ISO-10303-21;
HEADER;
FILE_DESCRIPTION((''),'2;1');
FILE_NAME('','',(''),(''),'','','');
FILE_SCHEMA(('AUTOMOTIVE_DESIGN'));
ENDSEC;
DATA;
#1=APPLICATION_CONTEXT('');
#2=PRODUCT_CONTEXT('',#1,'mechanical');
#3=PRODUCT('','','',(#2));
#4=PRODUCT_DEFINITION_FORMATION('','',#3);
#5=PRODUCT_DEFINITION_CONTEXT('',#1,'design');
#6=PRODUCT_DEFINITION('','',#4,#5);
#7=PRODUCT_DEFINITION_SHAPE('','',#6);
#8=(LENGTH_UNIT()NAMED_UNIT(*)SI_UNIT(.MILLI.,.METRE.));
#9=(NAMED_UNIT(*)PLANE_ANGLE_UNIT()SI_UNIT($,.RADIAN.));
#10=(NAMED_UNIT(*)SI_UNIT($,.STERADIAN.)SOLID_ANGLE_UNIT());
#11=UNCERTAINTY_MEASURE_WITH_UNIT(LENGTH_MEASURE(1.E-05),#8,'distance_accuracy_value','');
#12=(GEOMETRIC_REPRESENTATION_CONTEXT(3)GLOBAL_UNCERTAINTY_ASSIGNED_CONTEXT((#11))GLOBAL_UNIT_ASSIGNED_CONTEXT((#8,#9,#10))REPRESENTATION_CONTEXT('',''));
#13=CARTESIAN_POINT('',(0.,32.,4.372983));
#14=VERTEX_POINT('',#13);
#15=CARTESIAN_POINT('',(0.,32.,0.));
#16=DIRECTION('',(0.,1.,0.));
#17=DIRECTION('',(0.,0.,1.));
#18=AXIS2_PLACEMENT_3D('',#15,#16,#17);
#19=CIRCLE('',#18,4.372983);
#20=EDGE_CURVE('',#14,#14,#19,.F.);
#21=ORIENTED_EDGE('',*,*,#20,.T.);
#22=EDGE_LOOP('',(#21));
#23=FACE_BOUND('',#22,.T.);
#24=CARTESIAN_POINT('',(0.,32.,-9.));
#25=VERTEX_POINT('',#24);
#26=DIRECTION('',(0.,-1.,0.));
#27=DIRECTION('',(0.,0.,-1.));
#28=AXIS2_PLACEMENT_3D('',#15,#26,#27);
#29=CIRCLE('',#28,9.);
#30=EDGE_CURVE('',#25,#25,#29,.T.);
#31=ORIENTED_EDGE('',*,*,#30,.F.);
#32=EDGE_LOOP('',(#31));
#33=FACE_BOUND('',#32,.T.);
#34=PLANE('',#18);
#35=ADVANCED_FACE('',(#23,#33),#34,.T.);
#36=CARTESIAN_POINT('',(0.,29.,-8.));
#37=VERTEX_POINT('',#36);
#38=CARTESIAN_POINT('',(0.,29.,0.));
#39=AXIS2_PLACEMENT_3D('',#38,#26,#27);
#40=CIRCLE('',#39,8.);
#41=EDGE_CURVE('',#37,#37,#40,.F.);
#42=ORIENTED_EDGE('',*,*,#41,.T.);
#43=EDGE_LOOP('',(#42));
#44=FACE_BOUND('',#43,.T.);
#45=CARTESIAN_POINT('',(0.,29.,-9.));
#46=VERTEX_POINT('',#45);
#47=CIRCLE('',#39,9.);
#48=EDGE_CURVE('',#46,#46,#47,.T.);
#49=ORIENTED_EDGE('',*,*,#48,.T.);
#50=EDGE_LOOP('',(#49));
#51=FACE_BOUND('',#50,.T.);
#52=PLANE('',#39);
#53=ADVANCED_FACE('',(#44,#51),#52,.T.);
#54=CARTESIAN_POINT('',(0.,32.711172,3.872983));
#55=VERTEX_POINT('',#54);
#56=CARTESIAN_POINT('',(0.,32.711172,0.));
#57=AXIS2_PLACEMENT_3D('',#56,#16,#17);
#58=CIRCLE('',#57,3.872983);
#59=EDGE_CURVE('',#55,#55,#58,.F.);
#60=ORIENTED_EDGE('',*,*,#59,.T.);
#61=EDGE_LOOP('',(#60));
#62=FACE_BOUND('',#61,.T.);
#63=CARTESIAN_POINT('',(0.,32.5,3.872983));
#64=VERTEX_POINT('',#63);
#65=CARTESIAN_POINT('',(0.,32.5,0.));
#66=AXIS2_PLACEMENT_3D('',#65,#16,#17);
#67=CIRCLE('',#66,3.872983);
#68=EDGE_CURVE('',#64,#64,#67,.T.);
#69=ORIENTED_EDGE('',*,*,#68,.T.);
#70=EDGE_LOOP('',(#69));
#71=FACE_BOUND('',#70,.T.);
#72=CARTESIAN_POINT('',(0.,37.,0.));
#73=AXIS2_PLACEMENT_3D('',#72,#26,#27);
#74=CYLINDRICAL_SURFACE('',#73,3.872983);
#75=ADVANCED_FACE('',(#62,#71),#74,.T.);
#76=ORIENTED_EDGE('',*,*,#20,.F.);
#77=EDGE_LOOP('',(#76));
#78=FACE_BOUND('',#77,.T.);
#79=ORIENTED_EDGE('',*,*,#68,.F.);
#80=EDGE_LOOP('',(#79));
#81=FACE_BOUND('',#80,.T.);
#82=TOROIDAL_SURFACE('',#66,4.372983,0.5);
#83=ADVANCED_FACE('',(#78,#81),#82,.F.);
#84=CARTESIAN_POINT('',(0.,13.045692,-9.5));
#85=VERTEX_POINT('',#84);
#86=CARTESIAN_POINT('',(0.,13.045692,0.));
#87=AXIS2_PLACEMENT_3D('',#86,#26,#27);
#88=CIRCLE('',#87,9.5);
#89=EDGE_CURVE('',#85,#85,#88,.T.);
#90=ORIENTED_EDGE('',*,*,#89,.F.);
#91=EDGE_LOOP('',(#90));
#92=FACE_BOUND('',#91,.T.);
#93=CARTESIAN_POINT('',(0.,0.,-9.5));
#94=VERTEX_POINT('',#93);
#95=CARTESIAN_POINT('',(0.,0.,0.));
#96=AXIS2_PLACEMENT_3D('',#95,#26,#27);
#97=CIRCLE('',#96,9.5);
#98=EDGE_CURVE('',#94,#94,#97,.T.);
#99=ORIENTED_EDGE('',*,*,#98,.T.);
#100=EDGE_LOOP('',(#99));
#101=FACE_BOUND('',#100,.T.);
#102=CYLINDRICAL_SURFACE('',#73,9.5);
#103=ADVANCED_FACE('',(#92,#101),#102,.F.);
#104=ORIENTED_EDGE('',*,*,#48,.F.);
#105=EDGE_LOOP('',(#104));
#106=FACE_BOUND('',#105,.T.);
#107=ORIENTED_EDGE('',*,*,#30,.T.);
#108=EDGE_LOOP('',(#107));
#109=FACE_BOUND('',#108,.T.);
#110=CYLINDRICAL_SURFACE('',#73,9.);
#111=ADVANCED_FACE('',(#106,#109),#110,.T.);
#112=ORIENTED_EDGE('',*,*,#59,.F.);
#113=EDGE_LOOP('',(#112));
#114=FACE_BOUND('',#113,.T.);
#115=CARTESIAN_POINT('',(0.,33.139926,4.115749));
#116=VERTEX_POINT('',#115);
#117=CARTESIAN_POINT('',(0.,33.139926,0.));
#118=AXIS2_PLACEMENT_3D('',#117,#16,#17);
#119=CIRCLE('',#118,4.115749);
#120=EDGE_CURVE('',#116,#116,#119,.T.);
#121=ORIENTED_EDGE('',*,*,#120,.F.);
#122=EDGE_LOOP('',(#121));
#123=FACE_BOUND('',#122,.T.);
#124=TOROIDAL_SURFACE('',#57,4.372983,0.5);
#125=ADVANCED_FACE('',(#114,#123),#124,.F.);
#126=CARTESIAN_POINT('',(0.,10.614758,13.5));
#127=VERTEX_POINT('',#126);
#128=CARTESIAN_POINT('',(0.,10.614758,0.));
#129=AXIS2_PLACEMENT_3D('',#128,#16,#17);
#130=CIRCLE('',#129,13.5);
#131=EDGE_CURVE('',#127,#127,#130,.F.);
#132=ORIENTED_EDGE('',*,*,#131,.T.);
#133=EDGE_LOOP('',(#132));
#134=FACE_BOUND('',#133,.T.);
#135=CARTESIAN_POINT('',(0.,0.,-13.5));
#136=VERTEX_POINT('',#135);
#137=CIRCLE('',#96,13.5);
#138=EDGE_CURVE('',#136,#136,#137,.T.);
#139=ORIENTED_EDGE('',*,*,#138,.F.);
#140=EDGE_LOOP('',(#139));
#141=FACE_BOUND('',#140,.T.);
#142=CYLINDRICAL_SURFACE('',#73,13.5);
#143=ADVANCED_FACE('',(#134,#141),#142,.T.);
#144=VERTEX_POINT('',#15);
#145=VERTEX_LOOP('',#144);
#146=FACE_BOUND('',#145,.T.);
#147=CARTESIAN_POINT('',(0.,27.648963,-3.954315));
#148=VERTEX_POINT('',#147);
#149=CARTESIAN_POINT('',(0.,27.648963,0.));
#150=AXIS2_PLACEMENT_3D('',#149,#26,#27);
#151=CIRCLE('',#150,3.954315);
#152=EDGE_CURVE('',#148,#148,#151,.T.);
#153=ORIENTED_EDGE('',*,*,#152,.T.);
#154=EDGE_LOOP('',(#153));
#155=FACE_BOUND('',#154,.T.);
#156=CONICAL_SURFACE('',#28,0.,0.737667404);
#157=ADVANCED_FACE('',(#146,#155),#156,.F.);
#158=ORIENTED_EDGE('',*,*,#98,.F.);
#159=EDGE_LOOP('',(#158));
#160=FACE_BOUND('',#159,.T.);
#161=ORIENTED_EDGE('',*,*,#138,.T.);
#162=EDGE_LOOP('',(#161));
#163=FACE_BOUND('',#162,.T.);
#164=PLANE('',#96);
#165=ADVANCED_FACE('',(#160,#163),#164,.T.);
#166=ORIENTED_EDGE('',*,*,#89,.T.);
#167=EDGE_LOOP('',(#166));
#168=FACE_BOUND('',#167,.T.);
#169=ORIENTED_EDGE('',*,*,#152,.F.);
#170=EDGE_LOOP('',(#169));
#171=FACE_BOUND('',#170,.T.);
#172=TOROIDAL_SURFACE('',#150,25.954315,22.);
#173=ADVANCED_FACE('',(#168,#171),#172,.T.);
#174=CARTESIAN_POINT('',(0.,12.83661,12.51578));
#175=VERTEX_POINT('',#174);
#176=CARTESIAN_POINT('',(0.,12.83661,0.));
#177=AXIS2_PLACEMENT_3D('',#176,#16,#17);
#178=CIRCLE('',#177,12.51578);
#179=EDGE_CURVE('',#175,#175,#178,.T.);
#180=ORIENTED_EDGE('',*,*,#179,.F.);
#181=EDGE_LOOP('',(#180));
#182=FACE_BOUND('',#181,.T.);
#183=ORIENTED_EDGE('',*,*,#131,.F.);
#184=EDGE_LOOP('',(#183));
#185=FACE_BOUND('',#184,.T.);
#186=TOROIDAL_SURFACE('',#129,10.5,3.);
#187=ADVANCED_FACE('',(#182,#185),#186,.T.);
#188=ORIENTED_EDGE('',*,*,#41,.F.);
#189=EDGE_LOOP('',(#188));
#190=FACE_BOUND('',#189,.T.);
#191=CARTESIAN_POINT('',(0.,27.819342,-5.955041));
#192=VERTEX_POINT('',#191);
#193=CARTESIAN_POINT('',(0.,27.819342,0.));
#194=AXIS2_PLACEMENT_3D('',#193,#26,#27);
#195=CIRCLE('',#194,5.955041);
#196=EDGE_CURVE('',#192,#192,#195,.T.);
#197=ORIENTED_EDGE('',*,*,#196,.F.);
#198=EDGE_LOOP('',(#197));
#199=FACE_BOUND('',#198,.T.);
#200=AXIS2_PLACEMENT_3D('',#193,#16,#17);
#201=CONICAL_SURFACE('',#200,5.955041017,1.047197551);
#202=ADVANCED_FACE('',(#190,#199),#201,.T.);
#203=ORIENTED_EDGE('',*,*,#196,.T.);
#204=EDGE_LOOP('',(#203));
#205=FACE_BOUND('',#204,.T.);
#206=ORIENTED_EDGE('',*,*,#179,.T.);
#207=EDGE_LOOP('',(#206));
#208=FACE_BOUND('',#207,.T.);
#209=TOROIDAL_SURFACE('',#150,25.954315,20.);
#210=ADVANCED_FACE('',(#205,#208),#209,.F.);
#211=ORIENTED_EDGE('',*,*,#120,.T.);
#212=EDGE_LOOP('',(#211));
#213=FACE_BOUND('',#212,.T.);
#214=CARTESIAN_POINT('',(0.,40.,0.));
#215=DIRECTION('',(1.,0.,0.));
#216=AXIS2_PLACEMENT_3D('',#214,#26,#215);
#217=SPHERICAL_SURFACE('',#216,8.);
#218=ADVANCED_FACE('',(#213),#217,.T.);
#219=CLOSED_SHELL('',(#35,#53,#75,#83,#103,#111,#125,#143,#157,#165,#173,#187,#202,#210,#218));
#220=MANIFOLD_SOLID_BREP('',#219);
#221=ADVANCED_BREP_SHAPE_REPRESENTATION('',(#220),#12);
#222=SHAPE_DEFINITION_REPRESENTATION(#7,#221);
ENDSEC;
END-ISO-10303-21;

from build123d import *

# Parameters (mm, degrees)
CHAMFER1_SIZE = 2
FILLET1_R     = 3
FILLET2_R     = 0.5


with BuildPart() as part:
    # Sketch1 → Revolve1 (revolve)
    with BuildSketch(Plane.XY, mode=Mode.PRIVATE) as revolve1_sk:
        with BuildLine():
            Line((9.5, 13.045692134), (9.5, 0))
            Line((9.5, 0), (13.5, 0))
            Line((13.5, 0), (13.5, 12))
            ThreePointArc((13.5, 12), (7.655959241, 19.576158489), (6, 29))
            Line((6, 29), (9, 29))
            Line((9, 29), (9, 32))
            Line((9, 32), (3.872983346, 32))
            Line((3.872983346, 32), (3.872983346, 33))
            ThreePointArc((3.872983346, 33), (7.745966692, 42), (0, 48))
            Line((0, 48), (0, 40))
            Line((0, 40), (0, 37))
            Line((0, 37), (0, 34.783882181))
            Line((0, 34.783882181), (0, 32))
            Line((0, 32), (3.954315273, 27.64896262))
            ThreePointArc((3.954315273, 27.64896262), (5.387413027, 19.838550851), (9.5, 13.045692134))
        make_face()
    revolve(revolve1_sk.sketch.rotate(Axis((0, 37, 0), (0, 1, 0)), 90), axis=Axis((0, 37, 0), (0, 1, 0)))

    # Chamfer1
    # the kernel refuses this chamfer: 2, 1.204425644 mm, written as the material it adds along each edge
    with BuildSketch(Plane(origin=(0, 29, 0), x_dir=(0, 0, -1), z_dir=(1, 0, 0))) as chamfer1_piece_1:
        with BuildLine():
            Line((5.955041017, -1.180657619), (6 + CHAMFER1_SIZE, 0))
            Line((6 + CHAMFER1_SIZE, 0), (6, 0))
            ThreePointArc((6, 0), (5.968001768, -0.611258692), (5.955041017, -1.180657619))
        make_face()
    revolve(axis=Axis((0, 29, 0), (0, 1, 0)))

    # Fillet1
    fillet1_edges = [part.edges().sort_by_distance(p)[0] for p in [
        (0, 12, 13.5),
    ]]
    fillet(fillet1_edges, radius=FILLET1_R)

    # Fillet2
    fillet2_edges = [part.edges().sort_by_distance(p)[0] for p in [
        (0, 33, 3.872983346),
        (0, 32, 3.872983346),
    ]]
    fillet(fillet2_edges, radius=FILLET2_R)


solid = part.part
